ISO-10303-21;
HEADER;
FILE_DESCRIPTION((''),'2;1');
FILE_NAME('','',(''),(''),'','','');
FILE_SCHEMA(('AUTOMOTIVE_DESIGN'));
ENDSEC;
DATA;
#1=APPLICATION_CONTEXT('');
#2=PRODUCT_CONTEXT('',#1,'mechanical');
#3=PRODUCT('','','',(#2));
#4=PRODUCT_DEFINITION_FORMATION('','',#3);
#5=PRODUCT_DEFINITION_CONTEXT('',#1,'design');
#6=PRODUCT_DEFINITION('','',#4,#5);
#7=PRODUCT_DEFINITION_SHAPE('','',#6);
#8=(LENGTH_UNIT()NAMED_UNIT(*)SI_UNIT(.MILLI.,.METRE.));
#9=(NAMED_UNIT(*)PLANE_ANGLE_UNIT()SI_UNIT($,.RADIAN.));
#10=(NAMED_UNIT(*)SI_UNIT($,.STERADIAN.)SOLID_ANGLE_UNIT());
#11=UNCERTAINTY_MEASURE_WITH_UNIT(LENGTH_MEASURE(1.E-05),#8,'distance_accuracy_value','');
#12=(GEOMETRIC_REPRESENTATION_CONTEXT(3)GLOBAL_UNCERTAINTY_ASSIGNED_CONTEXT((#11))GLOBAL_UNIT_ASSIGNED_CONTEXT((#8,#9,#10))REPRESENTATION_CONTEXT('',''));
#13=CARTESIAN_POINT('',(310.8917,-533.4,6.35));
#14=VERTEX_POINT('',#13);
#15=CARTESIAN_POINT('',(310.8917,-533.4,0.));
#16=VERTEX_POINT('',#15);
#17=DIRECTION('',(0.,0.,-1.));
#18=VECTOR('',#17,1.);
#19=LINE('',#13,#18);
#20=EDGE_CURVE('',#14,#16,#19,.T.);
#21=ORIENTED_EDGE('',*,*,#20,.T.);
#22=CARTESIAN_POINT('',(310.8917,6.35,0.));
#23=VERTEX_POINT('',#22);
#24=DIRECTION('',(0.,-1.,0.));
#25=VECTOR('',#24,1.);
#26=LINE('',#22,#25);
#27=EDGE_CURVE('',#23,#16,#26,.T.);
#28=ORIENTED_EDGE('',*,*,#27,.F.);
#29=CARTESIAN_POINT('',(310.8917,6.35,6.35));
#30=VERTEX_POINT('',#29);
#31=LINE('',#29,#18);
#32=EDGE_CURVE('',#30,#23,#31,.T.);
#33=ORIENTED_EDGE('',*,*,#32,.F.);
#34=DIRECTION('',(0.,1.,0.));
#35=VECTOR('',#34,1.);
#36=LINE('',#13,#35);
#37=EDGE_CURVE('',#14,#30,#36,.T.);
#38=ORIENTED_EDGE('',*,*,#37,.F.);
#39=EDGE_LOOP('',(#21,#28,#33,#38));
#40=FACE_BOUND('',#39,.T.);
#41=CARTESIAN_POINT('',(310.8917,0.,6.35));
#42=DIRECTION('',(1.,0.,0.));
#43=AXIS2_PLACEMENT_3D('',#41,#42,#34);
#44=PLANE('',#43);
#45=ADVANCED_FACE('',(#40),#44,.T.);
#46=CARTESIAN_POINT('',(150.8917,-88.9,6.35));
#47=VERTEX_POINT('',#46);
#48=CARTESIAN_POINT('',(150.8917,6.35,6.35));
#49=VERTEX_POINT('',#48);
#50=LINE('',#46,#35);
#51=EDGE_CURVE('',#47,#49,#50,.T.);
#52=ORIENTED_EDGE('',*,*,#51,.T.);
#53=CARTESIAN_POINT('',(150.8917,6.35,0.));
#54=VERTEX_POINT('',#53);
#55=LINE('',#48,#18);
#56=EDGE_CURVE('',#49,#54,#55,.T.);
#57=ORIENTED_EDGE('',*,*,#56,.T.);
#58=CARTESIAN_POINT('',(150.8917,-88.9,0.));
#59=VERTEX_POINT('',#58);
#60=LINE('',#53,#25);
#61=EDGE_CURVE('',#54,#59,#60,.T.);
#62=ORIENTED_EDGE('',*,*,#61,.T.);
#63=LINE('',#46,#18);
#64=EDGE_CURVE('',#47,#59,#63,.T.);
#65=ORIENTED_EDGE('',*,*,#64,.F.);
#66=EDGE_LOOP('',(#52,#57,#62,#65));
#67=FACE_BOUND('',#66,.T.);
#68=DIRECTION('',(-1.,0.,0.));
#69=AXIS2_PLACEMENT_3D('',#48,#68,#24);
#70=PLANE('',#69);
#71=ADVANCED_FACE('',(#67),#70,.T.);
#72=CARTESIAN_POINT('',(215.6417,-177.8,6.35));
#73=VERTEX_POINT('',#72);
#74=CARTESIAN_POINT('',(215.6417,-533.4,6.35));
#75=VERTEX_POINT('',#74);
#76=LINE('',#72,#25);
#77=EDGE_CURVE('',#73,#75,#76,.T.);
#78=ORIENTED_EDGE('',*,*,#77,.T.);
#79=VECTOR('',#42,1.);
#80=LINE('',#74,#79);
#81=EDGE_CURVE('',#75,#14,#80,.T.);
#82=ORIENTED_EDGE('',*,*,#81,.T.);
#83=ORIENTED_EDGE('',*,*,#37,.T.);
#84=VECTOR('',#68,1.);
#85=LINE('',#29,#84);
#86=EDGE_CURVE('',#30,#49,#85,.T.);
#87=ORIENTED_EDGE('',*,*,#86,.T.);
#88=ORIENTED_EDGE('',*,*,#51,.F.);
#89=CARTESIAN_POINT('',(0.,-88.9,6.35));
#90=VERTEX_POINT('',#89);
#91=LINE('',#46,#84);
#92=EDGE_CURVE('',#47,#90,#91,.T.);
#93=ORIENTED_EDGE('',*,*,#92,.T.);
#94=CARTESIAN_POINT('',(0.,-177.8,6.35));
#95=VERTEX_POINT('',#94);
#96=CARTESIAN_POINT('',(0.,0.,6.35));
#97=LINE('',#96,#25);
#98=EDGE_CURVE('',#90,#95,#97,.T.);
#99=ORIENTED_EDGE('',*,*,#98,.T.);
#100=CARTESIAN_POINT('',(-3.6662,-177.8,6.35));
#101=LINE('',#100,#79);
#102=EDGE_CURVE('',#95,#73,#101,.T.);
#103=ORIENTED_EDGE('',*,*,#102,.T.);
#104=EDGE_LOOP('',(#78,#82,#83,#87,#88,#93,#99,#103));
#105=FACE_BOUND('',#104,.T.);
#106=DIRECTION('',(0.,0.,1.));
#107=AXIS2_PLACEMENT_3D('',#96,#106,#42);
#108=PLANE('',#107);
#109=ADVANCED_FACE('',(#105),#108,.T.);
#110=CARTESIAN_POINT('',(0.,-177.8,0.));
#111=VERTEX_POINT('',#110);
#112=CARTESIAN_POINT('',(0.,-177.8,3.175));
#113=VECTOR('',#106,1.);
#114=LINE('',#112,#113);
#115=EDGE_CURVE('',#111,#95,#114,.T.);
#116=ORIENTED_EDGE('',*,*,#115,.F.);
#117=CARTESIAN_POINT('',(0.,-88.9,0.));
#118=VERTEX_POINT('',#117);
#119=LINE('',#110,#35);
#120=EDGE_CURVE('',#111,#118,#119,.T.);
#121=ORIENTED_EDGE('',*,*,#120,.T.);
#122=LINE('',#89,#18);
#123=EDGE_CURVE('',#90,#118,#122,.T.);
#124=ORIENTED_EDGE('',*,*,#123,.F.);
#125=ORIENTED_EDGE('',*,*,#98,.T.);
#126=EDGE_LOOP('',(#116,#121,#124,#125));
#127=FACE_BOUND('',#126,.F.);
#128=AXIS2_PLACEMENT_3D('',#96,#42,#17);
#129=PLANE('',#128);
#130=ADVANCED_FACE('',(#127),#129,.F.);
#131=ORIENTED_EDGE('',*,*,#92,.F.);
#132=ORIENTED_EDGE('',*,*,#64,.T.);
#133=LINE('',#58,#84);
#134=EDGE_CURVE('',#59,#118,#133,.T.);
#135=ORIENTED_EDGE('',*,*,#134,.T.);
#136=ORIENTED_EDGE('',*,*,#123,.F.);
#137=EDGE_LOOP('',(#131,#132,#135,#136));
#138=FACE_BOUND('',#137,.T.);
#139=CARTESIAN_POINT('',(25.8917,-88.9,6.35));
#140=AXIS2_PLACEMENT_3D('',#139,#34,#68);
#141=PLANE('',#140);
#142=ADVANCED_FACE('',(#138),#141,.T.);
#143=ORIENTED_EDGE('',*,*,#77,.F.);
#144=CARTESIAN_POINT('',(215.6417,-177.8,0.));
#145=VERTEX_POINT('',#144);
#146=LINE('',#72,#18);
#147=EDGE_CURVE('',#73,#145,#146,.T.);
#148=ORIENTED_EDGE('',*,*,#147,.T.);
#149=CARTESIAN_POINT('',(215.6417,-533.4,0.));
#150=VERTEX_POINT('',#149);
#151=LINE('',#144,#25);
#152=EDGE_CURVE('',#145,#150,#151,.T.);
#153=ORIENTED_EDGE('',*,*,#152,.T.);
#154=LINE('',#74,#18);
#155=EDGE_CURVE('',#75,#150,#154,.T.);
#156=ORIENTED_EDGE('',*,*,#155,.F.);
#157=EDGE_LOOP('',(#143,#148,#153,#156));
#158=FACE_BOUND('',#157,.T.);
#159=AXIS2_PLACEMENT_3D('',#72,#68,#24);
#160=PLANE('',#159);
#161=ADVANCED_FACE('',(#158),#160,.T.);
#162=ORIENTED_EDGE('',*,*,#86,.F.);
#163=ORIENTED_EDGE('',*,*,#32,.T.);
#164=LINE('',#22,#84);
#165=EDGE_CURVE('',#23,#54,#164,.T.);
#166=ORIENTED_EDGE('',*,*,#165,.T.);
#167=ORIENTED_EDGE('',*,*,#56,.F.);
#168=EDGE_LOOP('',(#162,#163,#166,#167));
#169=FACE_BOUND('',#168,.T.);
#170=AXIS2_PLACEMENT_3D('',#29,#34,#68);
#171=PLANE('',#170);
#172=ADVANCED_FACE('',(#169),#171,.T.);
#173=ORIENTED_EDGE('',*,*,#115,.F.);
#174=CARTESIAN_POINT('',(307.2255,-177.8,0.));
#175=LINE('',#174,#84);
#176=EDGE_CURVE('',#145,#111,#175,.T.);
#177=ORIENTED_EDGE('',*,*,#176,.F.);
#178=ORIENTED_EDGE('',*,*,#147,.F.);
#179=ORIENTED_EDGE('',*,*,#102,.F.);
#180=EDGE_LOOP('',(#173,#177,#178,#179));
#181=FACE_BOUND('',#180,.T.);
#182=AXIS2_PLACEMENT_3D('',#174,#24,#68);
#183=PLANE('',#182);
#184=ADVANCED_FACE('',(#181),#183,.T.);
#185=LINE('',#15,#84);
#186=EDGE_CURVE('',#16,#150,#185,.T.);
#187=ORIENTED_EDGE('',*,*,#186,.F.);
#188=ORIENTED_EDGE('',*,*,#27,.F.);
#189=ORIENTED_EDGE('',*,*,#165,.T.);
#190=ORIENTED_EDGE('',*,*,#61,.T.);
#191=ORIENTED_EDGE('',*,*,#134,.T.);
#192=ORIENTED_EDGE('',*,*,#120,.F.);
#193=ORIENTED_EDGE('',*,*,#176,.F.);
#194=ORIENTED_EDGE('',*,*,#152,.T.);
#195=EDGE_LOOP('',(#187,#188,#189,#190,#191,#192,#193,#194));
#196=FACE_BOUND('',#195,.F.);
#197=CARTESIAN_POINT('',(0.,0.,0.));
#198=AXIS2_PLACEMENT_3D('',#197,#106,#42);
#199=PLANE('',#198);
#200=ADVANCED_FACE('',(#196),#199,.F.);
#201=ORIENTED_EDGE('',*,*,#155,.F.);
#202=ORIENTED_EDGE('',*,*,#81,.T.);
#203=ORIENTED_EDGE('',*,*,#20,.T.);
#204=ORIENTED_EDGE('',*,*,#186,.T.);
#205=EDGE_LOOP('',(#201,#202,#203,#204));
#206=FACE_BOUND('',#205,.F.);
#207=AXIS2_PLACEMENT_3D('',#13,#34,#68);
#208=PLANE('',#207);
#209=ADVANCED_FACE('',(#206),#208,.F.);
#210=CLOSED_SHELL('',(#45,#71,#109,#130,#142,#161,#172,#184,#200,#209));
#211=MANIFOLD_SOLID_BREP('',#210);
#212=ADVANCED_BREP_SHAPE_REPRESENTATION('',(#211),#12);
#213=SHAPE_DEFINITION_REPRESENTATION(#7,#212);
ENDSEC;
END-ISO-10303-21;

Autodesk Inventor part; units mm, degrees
ref_plane "YZ Plane" through (0, 0, 0) normal (1, 0, 0) x (0, 1, 0)
ref_plane "XZ Plane" through (0, 0, 0) normal (0, 1, 0) x (-1, 0, 0)
ref_plane "XY Plane" through (0, 0, 0) normal (0, 0, 1) x (1, 0, 0)
sketch "Sketch1" plane through (0, 0, 0) normal (0, 0, 1) x (1, 0, 0)
  line L0 (0, 0) -> (307.2255, 0)
  line L1 (307.2255, 0) -> (307.2255, -177.8)
  line L2 (307.2255, -177.8) -> (0, -177.8)
  line L3 (0, -177.8) -> (0, 0)
  line L4 (460.8382, 266.0651) -> (307.2255, 0)
  line L5 (307.2255, 0) -> (0, 0)
  line L6 (0, 0) -> (-153.6127, 266.0651)
  line L7 (-153.6127, 266.0651) -> (0, 532.1302)
  line L8 (0, 532.1302) -> (307.2255, 532.1302)
  line L9 (307.2255, 532.1302) -> (460.8382, 266.0651)
  point P0 (153.6127, 266.0651)
  dimension "d1" = 177.8
  dimension "d37" = 307.2255
extrude "Extrusion1" add sketch "Sketch1" along normal blind 6.35 contours L0 L1 L2 L3
sketch "Sketch2" plane through (0, 0, 0) normal (0, 1, 0) x (1, 0, 0)
  line L0 (307.2255, -6.35) -> (0, -6.35) projected
  line L1 (0, -6.35) -> (-3.6662, -6.35)
  line L2 (-3.6662, -6.35) -> (0, 0)
  line L3 (0, 0) -> (0, -6.35) projected
  line L4 (0, 0) -> (0, -6.35) projected
  line L5 (0, -6.35) -> (0, 0)
  line L6 (307.2255, -6.35) -> (310.8917, -6.35)
  line L7 (307.2255, 0) -> (307.2255, -6.35) projected
  line L8 (310.8917, -6.35) -> (307.2255, 0)
  line L9 (307.2255, 0) -> (307.2255, -6.35)
  dimension "d4" = 30
  dimension "d5" = 60
extrude "Extrusion2" add sketch "Sketch2" against normal blind 177.8
sketch "Sketch3" plane through (0, 0, 6.35) normal (0, 0, 1) x (1, 0, 0)
  line L0 (25.8917, -88.9) -> (225.8917, -88.9)
  line L1 (225.8917, -88.9) -> (225.8917, 0)
  line L2 (225.8917, 0) -> (25.8917, 0)
  line L3 (25.8917, 0) -> (25.8917, -88.9)
  line L4 (-3.6662, 0) -> (310.8917, 0) projected
  line L5 (25.8917, -88.9) -> (150.8917, -88.9)
  line L6 (150.8917, -88.9) -> (150.8917, 0)
  line L7 (150.8917, 0) -> (25.8917, 0)
  line L8 (25.8917, 0) -> (25.8917, -88.9)
  line L9 (310.8917, 0) -> (310.8917, -177.8) projected
  point P0 (0, 0)
  point P1 (153.6127, 0)
  dimension "d8" = 200
  dimension "d9" = 88.9
  dimension "d30" = 75
  dimension "d31" = 85
extrude "Extrusion3" cut sketch "Sketch3" against normal through all contours L3 L2 L6 L0
sketch "Sketch5" plane through (0, 0, 6.35) normal (0, 0, 1) x (1, 0, 0)
  line L0 (310.8917, 0) -> (310.8917, -177.8) projected
  line L1 (310.8917, -177.8) -> (215.6417, -177.8)
  line L2 (215.6417, -177.8) -> (215.6417, -533.4)
  line L3 (215.6417, -533.4) -> (310.8917, -533.4)
  line L4 (310.8917, -533.4) -> (310.8917, -177.8)
  point P0 (0, 0)
  dimension "d20" = 95.25
  dimension "d21" = 355.6
extrude "Extrusion5" add sketch "Sketch5" against normal blind 10
sketch "Sketch7" plane through (307.2255, -177.8, 0) normal (0, 1, 0) x (1, 0, 0)
  line L0 (0, 0) -> (3.6662, -6.35) projected
  line L1 (3.6662, -6.35) -> (3.6662, 3.65) projected
  line L2 (-91.5838, 3.65) -> (3.6662, 3.65) projected
  line L3 (-91.5838, 0) -> (-91.5838, 3.65) projected
  line L4 (0, 0) -> (-91.5838, 0) projected
  point P0 (-307.2255, 0)
extrude "Extrusion6" cut sketch "Sketch7" against normal through all
sketch "Sketch9" plane through (0, 0, 6.35) normal (0, 0, 1) x (1, 0, 0)
  line L0 (-3.6662, 0) -> (25.8917, 0) projected
  line L1 (25.8917, -88.9) -> (-3.6662, -88.9)
  line L2 (-3.6662, -88.9) -> (-3.6662, 0)
  line L3 (-3.6662, 0) -> (25.8917, 0)
  line L4 (25.8917, 0) -> (25.8917, -88.9)
  point P0 (0, 0)
extrude "Extrusion8" cut sketch "Sketch9" against normal through all
sketch "Sketch10" plane through (150.8917, 0, 0) normal (0, 1, 0) x (1, 0, 0)
  line L0 (0, -6.35) -> (-154.5578, -6.35) projected
  line L1 (-150.8917, 0) -> (-154.5578, 0)
  line L2 (-154.5578, 0) -> (-154.5578, -6.35)
  line L3 (-154.5578, -6.35) -> (-150.8917, -6.35)
  line L4 (-150.8917, -6.35) -> (-150.8917, 0)
  line L5 (160, -6.35) -> (156.3338, 0) projected
  line L6 (156.3338, 0) -> (160, 0)
  line L7 (160, 0) -> (160, -6.35)
  line L8 (160, -6.35) -> (156.3338, -6.35)
  line L9 (156.3338, -6.35) -> (156.3338, 0)
extrude "Extrusion9" cut sketch "Sketch10" against normal through all
sketch "Sketch11" plane through (0, 0, 6.35) normal (0, 0, 1) x (1, 0, 0)
  line L0 (150.8917, 0) -> (307.2255, 0) projected
  line L1 (307.2255, 0) -> (310.8917, 0)
  line L2 (310.8917, 0) -> (310.8917, -533.4)
  line L3 (310.8917, -533.4) -> (307.2255, -533.4)
  line L4 (307.2255, -533.4) -> (307.2255, 0)
  line L5 (215.6417, -177.8) -> (215.6417, -533.4) projected
  point P0 (0, 0)
  dimension "d38" = 95.25
extrude "Extrusion10" add sketch "Sketch11" against normal blind 6.35
sketch "Sketch12" plane through (0, 0, 6.35) normal (0, 0, 1) x (1, 0, 0)
  line L0 (150.8917, 0) -> (310.8917, 0) projected
  line L1 (150.8917, 0) -> (310.8917, 0)
  line L2 (310.8917, 0) -> (310.8917, 6.35)
  line L3 (310.8917, 6.35) -> (150.8917, 6.35)
  line L4 (150.8917, 6.35) -> (150.8917, 0)
  point P0 (0, 0)
  point P1 (310.8917, 3.175)
  dimension "d41" = 6.35
extrude "Extrusion11" add sketch "Sketch12" against normal blind 6.35
properties part number "BA03" material "ABS Plastic"
